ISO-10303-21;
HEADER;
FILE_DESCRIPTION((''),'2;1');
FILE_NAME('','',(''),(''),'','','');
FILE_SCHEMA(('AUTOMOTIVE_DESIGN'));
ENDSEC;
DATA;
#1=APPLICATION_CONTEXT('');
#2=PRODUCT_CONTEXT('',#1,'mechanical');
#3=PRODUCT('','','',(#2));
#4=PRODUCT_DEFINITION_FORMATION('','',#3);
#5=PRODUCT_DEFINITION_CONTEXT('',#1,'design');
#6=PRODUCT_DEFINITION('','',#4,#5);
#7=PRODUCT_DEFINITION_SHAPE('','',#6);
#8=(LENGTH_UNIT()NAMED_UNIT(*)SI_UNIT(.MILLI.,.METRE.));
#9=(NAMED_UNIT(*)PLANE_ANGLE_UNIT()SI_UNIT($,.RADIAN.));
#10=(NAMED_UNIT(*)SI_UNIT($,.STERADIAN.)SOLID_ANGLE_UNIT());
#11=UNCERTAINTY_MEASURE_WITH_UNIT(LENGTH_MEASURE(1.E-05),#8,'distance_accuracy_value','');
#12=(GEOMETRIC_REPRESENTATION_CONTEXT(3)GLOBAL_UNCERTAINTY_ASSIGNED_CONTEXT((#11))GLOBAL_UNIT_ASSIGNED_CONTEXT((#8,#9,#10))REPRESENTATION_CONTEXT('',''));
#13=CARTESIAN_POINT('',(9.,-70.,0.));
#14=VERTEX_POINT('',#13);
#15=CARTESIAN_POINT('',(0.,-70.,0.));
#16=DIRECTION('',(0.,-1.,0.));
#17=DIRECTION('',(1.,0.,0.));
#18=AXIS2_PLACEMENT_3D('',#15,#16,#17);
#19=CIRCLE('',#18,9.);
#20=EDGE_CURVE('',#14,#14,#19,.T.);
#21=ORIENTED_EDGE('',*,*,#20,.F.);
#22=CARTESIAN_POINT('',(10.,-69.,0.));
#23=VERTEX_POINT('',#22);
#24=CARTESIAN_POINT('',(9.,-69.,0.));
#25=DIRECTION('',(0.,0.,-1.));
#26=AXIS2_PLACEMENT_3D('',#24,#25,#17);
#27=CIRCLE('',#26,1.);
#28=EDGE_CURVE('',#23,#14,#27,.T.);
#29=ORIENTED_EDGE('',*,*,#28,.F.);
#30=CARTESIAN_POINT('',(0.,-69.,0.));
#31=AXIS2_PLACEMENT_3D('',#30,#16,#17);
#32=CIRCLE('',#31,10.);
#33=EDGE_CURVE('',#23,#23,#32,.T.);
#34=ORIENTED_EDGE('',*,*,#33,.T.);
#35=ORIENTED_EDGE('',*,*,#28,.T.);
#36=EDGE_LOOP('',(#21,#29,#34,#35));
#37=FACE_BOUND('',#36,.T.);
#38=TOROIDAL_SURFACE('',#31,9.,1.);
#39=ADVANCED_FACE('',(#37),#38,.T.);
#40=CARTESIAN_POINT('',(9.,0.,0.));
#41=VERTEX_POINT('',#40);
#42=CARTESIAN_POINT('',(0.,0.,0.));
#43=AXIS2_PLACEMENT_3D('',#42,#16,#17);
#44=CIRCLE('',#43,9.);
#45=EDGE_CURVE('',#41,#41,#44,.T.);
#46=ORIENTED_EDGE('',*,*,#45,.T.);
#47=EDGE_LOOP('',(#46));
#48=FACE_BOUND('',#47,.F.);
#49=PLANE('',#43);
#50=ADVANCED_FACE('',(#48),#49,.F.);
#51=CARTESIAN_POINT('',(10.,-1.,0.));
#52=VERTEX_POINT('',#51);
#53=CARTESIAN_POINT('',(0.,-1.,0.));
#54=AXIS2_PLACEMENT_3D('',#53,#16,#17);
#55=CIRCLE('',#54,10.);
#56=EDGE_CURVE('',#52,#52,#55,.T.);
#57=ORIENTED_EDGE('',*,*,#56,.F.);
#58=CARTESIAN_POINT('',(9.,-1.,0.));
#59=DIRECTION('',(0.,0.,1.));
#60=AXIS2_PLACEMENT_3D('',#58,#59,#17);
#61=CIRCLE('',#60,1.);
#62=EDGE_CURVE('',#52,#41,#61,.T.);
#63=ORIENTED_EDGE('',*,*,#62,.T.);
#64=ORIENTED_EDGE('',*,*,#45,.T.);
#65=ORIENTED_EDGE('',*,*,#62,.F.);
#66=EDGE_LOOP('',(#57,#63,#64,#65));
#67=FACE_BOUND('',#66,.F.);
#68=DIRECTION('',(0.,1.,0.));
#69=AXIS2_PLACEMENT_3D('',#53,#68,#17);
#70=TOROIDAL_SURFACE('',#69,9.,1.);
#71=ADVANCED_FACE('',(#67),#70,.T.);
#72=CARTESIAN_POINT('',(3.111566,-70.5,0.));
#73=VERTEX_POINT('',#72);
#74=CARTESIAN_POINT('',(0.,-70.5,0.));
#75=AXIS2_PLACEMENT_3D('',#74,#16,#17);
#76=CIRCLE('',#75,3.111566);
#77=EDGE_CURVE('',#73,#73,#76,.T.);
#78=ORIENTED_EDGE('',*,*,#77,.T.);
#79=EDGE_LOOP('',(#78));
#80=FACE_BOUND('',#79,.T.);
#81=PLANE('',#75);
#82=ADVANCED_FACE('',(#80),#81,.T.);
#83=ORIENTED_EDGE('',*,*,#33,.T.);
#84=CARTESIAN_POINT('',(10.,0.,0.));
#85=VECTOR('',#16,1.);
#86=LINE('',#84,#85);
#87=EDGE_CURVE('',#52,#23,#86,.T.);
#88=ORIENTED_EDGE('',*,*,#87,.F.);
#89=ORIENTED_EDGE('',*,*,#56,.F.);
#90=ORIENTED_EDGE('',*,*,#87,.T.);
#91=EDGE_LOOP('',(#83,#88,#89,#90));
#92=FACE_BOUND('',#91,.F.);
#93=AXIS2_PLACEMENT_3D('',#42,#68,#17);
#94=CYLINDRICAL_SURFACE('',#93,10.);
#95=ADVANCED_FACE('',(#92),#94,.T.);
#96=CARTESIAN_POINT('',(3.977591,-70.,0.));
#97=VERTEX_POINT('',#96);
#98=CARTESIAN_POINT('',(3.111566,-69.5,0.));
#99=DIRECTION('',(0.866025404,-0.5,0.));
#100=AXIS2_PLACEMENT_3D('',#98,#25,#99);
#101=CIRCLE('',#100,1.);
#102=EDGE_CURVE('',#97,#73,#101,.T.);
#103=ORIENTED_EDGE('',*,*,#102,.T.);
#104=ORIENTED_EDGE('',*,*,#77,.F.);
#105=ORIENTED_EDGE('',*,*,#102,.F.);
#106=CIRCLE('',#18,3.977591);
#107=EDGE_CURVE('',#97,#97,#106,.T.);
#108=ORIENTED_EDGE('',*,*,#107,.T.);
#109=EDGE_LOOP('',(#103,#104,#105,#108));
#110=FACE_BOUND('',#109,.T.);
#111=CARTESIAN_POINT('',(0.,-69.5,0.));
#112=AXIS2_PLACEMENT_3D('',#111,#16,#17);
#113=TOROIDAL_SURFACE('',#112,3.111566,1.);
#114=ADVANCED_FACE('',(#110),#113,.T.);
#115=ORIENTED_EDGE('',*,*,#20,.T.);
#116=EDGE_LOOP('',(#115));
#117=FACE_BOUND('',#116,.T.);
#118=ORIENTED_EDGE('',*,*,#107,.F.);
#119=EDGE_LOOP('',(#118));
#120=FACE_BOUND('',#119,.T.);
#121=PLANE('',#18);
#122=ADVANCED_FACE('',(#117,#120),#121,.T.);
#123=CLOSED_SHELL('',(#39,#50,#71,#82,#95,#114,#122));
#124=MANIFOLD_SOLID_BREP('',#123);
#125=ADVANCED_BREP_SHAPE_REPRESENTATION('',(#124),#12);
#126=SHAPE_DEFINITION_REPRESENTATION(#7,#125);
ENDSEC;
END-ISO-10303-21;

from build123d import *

# Parameters (mm, degrees)
F0_R     = 10
F1_DEPTH = 70
F2_R     = 1
F3_R     = 3.9775912989
F4_DEPTH = 0.5


# Not quite as in the source:
# - a fillet or chamfer that OpenCascade refuses, or shapes differently, is made with other operations: its cross-section is extruded or revolved along the edge and cut away or added


with BuildPart() as f1:
    # F0 (on Front) → F1 (new body)
    with BuildSketch(Plane.XZ):
        Circle(F0_R)
    extrude(amount=F1_DEPTH)

    # F2
    f2_edges = [f1.edges().sort_by_distance(p)[0] for p in [
        (-10, -70, 0),
        (-10, 0, 0),
    ]]
    fillet(f2_edges, radius=F2_R)

    # F3 (on face) → F4 (join)
    with BuildSketch(Plane.XZ.offset(70)):
        Circle(F3_R)
    extrude(amount=F4_DEPTH)

    # F5: fillet of radius 1 on 1 edges, made by hand

    # F5_s1 → F5_t2 (revolve, cut)
    with BuildSketch(Plane.XY):
        with BuildLine():
            ThreePointArc((3.9775912989, -70), (3.6115658951, -70.3660254038), (3.1115658951, -70.5))
            Line((3.1115658951, -70.5), (3.9775912989, -70.5))
            Line((3.9775912989, -70.5), (3.9775912989, -70))
        make_face()
    revolve(axis=Axis((0, -70.5, 0), (0, -1, 0)), mode=Mode.SUBTRACT)


solid = f1.part
